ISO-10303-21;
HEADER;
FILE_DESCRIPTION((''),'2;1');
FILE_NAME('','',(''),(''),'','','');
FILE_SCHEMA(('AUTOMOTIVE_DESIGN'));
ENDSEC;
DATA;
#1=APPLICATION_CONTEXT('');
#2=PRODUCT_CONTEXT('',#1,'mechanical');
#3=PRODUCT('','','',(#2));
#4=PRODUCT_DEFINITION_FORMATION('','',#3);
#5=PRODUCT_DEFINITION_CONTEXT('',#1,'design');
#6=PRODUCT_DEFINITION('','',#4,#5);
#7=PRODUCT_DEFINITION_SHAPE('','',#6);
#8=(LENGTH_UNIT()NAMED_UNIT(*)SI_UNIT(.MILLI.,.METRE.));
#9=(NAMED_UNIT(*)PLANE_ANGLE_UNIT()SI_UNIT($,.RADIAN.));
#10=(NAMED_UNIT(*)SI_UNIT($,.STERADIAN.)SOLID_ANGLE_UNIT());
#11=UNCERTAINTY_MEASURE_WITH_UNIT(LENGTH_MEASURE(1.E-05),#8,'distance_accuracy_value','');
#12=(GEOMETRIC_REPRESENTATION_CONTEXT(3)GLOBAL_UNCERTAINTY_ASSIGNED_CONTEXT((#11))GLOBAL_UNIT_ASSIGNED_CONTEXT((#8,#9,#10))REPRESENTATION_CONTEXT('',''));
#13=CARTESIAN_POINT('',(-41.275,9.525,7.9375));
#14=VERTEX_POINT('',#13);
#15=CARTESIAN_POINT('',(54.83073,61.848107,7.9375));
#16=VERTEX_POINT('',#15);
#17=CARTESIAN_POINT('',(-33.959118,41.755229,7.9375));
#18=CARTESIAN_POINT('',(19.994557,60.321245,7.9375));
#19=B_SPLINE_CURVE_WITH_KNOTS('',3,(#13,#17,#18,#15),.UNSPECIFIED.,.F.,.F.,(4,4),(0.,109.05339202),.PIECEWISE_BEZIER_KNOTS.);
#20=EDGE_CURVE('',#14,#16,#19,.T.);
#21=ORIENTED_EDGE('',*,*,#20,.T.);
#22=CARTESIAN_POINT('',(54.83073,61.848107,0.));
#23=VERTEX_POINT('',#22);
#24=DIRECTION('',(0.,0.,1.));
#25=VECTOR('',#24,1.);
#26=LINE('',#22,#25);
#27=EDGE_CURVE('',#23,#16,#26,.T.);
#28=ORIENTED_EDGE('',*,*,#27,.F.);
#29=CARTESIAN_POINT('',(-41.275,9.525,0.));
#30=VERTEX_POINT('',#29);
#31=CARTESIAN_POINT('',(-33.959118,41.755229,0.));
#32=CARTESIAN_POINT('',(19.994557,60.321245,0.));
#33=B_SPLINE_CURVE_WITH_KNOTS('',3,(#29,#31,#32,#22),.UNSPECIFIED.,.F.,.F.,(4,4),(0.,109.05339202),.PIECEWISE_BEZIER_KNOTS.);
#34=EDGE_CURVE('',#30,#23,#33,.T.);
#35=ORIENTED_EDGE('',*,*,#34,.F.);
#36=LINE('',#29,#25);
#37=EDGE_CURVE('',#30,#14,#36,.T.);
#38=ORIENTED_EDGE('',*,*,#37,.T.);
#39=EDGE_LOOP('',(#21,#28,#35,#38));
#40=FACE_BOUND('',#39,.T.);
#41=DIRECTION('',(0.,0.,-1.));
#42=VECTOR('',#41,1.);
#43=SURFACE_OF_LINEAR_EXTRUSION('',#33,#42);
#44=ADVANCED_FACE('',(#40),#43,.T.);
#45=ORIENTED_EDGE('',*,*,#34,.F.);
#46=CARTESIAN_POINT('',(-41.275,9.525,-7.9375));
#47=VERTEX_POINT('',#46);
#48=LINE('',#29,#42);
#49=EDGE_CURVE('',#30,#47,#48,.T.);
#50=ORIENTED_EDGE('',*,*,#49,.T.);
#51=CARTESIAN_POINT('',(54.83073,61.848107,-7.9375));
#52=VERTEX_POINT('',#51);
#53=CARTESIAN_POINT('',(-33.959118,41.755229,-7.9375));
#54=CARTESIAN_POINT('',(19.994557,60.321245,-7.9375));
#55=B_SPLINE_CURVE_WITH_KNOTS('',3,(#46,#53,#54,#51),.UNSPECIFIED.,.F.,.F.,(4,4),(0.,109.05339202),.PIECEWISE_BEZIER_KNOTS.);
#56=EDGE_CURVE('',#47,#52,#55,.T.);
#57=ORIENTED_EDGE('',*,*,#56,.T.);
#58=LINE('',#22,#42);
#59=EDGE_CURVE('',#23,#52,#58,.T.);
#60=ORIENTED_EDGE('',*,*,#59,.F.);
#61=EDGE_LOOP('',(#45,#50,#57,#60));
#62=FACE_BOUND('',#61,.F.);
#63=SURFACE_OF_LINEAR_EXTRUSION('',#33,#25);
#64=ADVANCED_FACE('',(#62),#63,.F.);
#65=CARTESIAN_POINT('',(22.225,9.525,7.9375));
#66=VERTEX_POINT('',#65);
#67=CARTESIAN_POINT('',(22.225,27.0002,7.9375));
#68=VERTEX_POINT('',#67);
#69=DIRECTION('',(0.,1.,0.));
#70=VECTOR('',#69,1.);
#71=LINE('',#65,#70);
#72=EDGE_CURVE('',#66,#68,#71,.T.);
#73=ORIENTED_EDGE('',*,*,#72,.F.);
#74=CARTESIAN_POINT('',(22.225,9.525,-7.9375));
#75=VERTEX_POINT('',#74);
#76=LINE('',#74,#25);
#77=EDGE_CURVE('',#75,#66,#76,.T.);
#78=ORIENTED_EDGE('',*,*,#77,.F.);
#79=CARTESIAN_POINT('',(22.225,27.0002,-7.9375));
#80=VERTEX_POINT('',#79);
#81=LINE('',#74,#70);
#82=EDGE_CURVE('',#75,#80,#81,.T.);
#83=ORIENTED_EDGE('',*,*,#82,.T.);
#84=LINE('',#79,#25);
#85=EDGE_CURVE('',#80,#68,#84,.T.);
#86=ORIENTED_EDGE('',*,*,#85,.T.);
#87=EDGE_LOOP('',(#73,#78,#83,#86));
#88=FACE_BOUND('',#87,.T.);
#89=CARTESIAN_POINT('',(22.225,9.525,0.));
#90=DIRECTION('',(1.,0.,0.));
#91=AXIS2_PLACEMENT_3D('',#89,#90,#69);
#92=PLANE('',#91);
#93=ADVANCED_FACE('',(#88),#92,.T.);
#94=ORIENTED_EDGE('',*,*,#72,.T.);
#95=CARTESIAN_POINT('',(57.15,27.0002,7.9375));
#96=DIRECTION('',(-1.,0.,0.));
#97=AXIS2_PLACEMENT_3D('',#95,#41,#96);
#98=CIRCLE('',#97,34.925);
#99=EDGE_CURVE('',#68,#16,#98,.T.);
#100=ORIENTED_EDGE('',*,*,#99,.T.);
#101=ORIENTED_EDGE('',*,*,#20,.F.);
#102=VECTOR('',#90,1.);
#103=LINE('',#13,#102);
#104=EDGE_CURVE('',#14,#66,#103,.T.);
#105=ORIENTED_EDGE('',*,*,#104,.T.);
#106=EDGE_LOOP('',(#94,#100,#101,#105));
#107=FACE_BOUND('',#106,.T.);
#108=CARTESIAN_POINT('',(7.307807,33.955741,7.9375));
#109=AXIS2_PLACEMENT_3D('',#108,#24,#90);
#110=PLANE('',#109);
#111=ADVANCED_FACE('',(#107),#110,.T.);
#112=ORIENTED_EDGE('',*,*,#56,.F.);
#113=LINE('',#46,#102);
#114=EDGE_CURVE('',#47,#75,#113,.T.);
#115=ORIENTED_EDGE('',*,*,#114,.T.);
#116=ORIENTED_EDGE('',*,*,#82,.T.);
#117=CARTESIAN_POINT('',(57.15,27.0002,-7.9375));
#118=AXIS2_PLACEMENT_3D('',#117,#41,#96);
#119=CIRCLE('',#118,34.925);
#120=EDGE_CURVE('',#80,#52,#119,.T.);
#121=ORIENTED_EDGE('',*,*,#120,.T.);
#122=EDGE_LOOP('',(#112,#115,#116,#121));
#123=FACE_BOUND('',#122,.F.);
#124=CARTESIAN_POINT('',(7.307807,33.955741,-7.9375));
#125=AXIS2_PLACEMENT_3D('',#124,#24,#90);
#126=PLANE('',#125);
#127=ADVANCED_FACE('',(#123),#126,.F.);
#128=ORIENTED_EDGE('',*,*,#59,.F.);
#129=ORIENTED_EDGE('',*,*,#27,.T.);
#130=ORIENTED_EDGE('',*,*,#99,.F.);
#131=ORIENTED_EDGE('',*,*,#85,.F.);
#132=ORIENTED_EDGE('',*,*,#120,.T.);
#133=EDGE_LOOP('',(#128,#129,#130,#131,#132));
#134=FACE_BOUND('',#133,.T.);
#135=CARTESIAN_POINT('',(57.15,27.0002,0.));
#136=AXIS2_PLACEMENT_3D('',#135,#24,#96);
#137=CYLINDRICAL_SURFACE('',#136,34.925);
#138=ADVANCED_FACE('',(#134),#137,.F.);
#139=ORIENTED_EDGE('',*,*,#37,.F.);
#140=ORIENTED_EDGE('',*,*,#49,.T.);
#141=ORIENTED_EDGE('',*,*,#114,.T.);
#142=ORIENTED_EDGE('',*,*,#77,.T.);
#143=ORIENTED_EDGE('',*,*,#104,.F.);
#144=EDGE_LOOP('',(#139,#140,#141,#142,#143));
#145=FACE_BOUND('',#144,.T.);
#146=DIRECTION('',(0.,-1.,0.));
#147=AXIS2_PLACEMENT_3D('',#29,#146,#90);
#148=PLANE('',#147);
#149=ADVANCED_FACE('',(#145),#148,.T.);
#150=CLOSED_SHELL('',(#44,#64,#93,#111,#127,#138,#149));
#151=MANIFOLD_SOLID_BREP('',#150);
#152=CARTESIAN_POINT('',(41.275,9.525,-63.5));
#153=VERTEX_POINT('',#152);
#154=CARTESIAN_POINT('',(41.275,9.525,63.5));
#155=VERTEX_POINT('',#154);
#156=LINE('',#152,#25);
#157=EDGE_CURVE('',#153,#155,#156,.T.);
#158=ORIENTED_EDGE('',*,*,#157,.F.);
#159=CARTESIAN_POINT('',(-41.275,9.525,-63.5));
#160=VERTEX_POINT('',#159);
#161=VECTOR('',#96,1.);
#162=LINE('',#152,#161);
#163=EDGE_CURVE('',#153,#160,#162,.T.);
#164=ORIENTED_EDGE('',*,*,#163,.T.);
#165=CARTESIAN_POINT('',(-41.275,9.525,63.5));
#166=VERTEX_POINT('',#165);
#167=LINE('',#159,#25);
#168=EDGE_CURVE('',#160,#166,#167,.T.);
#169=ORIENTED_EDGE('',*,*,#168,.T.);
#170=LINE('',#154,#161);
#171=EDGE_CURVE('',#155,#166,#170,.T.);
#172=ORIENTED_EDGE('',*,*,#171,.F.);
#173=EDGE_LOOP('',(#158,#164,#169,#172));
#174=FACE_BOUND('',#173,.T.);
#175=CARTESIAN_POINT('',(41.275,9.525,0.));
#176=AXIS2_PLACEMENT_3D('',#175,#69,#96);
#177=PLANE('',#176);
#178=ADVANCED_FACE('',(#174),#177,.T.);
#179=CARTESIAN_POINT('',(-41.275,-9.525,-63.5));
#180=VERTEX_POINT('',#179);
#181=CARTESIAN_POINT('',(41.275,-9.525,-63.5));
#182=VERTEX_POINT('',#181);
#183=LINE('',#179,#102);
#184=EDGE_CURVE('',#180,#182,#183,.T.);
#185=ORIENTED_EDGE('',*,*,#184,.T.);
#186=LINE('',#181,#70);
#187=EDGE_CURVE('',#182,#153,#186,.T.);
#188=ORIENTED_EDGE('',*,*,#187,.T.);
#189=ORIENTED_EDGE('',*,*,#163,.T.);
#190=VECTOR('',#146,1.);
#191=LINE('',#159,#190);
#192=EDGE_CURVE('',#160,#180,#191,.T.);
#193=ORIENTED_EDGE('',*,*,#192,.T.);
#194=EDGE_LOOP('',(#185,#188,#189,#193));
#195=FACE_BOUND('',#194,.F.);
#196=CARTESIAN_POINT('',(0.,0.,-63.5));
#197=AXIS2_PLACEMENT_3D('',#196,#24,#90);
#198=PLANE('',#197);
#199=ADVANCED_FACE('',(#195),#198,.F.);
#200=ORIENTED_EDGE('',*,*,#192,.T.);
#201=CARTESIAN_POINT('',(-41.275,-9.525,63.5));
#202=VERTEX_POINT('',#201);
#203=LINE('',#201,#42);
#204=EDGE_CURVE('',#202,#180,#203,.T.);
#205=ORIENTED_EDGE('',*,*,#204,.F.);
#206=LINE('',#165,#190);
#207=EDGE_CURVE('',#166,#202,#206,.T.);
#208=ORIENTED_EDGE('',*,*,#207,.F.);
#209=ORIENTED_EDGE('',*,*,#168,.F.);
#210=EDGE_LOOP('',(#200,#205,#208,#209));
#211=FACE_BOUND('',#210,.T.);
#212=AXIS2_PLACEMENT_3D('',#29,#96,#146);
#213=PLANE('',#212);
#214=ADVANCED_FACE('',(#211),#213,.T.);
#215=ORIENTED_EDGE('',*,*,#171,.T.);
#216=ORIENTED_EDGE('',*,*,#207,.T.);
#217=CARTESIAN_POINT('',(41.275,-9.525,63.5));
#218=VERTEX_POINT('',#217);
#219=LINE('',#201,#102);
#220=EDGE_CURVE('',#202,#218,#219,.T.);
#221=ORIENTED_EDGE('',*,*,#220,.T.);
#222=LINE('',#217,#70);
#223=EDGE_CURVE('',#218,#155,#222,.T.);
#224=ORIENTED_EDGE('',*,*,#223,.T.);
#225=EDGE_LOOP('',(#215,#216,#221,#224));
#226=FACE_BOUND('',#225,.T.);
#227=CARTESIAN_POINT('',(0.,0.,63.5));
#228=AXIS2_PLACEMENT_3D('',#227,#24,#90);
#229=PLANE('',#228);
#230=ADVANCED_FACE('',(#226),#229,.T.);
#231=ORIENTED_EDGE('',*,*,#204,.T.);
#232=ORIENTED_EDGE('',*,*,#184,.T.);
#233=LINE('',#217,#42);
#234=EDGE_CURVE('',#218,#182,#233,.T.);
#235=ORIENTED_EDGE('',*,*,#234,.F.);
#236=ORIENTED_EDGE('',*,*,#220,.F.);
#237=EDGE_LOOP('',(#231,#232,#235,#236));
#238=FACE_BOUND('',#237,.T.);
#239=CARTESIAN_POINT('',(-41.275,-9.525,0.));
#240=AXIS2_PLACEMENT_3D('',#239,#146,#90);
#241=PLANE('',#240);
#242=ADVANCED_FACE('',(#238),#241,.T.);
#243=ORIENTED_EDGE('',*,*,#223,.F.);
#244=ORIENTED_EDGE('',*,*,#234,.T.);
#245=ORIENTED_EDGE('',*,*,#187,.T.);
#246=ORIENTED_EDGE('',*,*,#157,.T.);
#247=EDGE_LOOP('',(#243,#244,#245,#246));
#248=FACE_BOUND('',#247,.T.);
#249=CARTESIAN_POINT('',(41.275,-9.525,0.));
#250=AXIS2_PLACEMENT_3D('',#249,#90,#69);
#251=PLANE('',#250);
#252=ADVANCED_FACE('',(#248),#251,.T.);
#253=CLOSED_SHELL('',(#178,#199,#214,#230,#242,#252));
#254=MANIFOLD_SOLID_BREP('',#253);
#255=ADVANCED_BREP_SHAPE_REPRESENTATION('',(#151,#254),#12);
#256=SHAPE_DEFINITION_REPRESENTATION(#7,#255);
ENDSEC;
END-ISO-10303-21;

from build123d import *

# Parameters (mm, degrees)
F1_DEPTH = 63.5
F0_W     = 25.4
F0_H     = 28.575
F2_DEPTH = 25.4
F3_DEPTH = 7.9375


# Not quite as in the source:
# - a feature of the source that left no trace in its solid (it failed there, or was rolled back) is left out


with BuildPart() as f1:
    # F0 (on Top) → F1 (new body, symmetric)
    with BuildSketch(Plane.XY):
        Polygon((41.275, -9.525), (41.275, 9.525), (22.225, 9.525), (-41.275, 9.525), (-41.275, -9.525), align=None)
    extrude(amount=F1_DEPTH, both=True)

    # F0 (on Top) → F2 (cut, symmetric)
    with BuildSketch(Plane.XY):
        with BuildLine():
            Line((22.225, 9.525), (41.275, 9.525))
            Line((41.275, 9.525), (41.275, 27.0002))
            ThreePointArc((41.275, 27.0002), (45.9246798487, 38.2255201513), (57.15, 42.8752))
            Line((57.15, 42.8752), (60.325, 42.8752))
            Line((60.325, 42.8752), (60.325, 61.9252))
            Line((60.325, 61.9252), (57.15, 61.9252))
            add(Edge.make_bspline(
                [(54.8307298061, 61.8481068348), (55.6137268289, 61.8824254321), (56.3870657784, 61.908135928), (57.15, 61.9252)],
                knots=[109.0533920202, 109.0533920202, 109.0533920202, 109.0533920202, 111.5045361635, 111.5045361635, 111.5045361635, 111.5045361635], degree=3))
            ThreePointArc((54.8307298061, 61.8481068348), (31.6474889813, 50.8618335723), (22.225, 27.0002))
            Line((22.225, 27.0002), (22.225, 9.525))
        make_face()
        with Locations((98.425, 52.3875)):
            Rectangle(F0_W, F0_H)
        Polygon((60.325, 61.9252), (60.325, 42.8752), (60.325, 38.1), (85.725, 38.1), (85.725, 66.675), (60.325, 66.675), align=None)
    extrude(amount=F2_DEPTH, both=True, mode=Mode.SUBTRACT)


with BuildPart() as f3:
    # F0 (on Top) → F3 (new body, symmetric)
    with BuildSketch(Plane.XY):
        with BuildLine():
            Line((-41.275, 9.525), (22.225, 9.525))
            Line((22.225, 9.525), (22.225, 27.0002))
            ThreePointArc((22.225, 27.0002), (31.6474889813, 50.8618335723), (54.8307298061, 61.8481068348))
            add(Edge.make_bspline(
                [(-41.275, 9.525), (-33.959118263, 41.7552285314), (19.9945568679, 60.3212445943), (54.8307298061, 61.8481068348)],
                knots=[0, 0, 0, 0, 109.0533920202, 109.0533920202, 109.0533920202, 109.0533920202], degree=3))
        make_face()
    extrude(amount=F3_DEPTH, both=True)


solid = Compound([f1.part, f3.part])
